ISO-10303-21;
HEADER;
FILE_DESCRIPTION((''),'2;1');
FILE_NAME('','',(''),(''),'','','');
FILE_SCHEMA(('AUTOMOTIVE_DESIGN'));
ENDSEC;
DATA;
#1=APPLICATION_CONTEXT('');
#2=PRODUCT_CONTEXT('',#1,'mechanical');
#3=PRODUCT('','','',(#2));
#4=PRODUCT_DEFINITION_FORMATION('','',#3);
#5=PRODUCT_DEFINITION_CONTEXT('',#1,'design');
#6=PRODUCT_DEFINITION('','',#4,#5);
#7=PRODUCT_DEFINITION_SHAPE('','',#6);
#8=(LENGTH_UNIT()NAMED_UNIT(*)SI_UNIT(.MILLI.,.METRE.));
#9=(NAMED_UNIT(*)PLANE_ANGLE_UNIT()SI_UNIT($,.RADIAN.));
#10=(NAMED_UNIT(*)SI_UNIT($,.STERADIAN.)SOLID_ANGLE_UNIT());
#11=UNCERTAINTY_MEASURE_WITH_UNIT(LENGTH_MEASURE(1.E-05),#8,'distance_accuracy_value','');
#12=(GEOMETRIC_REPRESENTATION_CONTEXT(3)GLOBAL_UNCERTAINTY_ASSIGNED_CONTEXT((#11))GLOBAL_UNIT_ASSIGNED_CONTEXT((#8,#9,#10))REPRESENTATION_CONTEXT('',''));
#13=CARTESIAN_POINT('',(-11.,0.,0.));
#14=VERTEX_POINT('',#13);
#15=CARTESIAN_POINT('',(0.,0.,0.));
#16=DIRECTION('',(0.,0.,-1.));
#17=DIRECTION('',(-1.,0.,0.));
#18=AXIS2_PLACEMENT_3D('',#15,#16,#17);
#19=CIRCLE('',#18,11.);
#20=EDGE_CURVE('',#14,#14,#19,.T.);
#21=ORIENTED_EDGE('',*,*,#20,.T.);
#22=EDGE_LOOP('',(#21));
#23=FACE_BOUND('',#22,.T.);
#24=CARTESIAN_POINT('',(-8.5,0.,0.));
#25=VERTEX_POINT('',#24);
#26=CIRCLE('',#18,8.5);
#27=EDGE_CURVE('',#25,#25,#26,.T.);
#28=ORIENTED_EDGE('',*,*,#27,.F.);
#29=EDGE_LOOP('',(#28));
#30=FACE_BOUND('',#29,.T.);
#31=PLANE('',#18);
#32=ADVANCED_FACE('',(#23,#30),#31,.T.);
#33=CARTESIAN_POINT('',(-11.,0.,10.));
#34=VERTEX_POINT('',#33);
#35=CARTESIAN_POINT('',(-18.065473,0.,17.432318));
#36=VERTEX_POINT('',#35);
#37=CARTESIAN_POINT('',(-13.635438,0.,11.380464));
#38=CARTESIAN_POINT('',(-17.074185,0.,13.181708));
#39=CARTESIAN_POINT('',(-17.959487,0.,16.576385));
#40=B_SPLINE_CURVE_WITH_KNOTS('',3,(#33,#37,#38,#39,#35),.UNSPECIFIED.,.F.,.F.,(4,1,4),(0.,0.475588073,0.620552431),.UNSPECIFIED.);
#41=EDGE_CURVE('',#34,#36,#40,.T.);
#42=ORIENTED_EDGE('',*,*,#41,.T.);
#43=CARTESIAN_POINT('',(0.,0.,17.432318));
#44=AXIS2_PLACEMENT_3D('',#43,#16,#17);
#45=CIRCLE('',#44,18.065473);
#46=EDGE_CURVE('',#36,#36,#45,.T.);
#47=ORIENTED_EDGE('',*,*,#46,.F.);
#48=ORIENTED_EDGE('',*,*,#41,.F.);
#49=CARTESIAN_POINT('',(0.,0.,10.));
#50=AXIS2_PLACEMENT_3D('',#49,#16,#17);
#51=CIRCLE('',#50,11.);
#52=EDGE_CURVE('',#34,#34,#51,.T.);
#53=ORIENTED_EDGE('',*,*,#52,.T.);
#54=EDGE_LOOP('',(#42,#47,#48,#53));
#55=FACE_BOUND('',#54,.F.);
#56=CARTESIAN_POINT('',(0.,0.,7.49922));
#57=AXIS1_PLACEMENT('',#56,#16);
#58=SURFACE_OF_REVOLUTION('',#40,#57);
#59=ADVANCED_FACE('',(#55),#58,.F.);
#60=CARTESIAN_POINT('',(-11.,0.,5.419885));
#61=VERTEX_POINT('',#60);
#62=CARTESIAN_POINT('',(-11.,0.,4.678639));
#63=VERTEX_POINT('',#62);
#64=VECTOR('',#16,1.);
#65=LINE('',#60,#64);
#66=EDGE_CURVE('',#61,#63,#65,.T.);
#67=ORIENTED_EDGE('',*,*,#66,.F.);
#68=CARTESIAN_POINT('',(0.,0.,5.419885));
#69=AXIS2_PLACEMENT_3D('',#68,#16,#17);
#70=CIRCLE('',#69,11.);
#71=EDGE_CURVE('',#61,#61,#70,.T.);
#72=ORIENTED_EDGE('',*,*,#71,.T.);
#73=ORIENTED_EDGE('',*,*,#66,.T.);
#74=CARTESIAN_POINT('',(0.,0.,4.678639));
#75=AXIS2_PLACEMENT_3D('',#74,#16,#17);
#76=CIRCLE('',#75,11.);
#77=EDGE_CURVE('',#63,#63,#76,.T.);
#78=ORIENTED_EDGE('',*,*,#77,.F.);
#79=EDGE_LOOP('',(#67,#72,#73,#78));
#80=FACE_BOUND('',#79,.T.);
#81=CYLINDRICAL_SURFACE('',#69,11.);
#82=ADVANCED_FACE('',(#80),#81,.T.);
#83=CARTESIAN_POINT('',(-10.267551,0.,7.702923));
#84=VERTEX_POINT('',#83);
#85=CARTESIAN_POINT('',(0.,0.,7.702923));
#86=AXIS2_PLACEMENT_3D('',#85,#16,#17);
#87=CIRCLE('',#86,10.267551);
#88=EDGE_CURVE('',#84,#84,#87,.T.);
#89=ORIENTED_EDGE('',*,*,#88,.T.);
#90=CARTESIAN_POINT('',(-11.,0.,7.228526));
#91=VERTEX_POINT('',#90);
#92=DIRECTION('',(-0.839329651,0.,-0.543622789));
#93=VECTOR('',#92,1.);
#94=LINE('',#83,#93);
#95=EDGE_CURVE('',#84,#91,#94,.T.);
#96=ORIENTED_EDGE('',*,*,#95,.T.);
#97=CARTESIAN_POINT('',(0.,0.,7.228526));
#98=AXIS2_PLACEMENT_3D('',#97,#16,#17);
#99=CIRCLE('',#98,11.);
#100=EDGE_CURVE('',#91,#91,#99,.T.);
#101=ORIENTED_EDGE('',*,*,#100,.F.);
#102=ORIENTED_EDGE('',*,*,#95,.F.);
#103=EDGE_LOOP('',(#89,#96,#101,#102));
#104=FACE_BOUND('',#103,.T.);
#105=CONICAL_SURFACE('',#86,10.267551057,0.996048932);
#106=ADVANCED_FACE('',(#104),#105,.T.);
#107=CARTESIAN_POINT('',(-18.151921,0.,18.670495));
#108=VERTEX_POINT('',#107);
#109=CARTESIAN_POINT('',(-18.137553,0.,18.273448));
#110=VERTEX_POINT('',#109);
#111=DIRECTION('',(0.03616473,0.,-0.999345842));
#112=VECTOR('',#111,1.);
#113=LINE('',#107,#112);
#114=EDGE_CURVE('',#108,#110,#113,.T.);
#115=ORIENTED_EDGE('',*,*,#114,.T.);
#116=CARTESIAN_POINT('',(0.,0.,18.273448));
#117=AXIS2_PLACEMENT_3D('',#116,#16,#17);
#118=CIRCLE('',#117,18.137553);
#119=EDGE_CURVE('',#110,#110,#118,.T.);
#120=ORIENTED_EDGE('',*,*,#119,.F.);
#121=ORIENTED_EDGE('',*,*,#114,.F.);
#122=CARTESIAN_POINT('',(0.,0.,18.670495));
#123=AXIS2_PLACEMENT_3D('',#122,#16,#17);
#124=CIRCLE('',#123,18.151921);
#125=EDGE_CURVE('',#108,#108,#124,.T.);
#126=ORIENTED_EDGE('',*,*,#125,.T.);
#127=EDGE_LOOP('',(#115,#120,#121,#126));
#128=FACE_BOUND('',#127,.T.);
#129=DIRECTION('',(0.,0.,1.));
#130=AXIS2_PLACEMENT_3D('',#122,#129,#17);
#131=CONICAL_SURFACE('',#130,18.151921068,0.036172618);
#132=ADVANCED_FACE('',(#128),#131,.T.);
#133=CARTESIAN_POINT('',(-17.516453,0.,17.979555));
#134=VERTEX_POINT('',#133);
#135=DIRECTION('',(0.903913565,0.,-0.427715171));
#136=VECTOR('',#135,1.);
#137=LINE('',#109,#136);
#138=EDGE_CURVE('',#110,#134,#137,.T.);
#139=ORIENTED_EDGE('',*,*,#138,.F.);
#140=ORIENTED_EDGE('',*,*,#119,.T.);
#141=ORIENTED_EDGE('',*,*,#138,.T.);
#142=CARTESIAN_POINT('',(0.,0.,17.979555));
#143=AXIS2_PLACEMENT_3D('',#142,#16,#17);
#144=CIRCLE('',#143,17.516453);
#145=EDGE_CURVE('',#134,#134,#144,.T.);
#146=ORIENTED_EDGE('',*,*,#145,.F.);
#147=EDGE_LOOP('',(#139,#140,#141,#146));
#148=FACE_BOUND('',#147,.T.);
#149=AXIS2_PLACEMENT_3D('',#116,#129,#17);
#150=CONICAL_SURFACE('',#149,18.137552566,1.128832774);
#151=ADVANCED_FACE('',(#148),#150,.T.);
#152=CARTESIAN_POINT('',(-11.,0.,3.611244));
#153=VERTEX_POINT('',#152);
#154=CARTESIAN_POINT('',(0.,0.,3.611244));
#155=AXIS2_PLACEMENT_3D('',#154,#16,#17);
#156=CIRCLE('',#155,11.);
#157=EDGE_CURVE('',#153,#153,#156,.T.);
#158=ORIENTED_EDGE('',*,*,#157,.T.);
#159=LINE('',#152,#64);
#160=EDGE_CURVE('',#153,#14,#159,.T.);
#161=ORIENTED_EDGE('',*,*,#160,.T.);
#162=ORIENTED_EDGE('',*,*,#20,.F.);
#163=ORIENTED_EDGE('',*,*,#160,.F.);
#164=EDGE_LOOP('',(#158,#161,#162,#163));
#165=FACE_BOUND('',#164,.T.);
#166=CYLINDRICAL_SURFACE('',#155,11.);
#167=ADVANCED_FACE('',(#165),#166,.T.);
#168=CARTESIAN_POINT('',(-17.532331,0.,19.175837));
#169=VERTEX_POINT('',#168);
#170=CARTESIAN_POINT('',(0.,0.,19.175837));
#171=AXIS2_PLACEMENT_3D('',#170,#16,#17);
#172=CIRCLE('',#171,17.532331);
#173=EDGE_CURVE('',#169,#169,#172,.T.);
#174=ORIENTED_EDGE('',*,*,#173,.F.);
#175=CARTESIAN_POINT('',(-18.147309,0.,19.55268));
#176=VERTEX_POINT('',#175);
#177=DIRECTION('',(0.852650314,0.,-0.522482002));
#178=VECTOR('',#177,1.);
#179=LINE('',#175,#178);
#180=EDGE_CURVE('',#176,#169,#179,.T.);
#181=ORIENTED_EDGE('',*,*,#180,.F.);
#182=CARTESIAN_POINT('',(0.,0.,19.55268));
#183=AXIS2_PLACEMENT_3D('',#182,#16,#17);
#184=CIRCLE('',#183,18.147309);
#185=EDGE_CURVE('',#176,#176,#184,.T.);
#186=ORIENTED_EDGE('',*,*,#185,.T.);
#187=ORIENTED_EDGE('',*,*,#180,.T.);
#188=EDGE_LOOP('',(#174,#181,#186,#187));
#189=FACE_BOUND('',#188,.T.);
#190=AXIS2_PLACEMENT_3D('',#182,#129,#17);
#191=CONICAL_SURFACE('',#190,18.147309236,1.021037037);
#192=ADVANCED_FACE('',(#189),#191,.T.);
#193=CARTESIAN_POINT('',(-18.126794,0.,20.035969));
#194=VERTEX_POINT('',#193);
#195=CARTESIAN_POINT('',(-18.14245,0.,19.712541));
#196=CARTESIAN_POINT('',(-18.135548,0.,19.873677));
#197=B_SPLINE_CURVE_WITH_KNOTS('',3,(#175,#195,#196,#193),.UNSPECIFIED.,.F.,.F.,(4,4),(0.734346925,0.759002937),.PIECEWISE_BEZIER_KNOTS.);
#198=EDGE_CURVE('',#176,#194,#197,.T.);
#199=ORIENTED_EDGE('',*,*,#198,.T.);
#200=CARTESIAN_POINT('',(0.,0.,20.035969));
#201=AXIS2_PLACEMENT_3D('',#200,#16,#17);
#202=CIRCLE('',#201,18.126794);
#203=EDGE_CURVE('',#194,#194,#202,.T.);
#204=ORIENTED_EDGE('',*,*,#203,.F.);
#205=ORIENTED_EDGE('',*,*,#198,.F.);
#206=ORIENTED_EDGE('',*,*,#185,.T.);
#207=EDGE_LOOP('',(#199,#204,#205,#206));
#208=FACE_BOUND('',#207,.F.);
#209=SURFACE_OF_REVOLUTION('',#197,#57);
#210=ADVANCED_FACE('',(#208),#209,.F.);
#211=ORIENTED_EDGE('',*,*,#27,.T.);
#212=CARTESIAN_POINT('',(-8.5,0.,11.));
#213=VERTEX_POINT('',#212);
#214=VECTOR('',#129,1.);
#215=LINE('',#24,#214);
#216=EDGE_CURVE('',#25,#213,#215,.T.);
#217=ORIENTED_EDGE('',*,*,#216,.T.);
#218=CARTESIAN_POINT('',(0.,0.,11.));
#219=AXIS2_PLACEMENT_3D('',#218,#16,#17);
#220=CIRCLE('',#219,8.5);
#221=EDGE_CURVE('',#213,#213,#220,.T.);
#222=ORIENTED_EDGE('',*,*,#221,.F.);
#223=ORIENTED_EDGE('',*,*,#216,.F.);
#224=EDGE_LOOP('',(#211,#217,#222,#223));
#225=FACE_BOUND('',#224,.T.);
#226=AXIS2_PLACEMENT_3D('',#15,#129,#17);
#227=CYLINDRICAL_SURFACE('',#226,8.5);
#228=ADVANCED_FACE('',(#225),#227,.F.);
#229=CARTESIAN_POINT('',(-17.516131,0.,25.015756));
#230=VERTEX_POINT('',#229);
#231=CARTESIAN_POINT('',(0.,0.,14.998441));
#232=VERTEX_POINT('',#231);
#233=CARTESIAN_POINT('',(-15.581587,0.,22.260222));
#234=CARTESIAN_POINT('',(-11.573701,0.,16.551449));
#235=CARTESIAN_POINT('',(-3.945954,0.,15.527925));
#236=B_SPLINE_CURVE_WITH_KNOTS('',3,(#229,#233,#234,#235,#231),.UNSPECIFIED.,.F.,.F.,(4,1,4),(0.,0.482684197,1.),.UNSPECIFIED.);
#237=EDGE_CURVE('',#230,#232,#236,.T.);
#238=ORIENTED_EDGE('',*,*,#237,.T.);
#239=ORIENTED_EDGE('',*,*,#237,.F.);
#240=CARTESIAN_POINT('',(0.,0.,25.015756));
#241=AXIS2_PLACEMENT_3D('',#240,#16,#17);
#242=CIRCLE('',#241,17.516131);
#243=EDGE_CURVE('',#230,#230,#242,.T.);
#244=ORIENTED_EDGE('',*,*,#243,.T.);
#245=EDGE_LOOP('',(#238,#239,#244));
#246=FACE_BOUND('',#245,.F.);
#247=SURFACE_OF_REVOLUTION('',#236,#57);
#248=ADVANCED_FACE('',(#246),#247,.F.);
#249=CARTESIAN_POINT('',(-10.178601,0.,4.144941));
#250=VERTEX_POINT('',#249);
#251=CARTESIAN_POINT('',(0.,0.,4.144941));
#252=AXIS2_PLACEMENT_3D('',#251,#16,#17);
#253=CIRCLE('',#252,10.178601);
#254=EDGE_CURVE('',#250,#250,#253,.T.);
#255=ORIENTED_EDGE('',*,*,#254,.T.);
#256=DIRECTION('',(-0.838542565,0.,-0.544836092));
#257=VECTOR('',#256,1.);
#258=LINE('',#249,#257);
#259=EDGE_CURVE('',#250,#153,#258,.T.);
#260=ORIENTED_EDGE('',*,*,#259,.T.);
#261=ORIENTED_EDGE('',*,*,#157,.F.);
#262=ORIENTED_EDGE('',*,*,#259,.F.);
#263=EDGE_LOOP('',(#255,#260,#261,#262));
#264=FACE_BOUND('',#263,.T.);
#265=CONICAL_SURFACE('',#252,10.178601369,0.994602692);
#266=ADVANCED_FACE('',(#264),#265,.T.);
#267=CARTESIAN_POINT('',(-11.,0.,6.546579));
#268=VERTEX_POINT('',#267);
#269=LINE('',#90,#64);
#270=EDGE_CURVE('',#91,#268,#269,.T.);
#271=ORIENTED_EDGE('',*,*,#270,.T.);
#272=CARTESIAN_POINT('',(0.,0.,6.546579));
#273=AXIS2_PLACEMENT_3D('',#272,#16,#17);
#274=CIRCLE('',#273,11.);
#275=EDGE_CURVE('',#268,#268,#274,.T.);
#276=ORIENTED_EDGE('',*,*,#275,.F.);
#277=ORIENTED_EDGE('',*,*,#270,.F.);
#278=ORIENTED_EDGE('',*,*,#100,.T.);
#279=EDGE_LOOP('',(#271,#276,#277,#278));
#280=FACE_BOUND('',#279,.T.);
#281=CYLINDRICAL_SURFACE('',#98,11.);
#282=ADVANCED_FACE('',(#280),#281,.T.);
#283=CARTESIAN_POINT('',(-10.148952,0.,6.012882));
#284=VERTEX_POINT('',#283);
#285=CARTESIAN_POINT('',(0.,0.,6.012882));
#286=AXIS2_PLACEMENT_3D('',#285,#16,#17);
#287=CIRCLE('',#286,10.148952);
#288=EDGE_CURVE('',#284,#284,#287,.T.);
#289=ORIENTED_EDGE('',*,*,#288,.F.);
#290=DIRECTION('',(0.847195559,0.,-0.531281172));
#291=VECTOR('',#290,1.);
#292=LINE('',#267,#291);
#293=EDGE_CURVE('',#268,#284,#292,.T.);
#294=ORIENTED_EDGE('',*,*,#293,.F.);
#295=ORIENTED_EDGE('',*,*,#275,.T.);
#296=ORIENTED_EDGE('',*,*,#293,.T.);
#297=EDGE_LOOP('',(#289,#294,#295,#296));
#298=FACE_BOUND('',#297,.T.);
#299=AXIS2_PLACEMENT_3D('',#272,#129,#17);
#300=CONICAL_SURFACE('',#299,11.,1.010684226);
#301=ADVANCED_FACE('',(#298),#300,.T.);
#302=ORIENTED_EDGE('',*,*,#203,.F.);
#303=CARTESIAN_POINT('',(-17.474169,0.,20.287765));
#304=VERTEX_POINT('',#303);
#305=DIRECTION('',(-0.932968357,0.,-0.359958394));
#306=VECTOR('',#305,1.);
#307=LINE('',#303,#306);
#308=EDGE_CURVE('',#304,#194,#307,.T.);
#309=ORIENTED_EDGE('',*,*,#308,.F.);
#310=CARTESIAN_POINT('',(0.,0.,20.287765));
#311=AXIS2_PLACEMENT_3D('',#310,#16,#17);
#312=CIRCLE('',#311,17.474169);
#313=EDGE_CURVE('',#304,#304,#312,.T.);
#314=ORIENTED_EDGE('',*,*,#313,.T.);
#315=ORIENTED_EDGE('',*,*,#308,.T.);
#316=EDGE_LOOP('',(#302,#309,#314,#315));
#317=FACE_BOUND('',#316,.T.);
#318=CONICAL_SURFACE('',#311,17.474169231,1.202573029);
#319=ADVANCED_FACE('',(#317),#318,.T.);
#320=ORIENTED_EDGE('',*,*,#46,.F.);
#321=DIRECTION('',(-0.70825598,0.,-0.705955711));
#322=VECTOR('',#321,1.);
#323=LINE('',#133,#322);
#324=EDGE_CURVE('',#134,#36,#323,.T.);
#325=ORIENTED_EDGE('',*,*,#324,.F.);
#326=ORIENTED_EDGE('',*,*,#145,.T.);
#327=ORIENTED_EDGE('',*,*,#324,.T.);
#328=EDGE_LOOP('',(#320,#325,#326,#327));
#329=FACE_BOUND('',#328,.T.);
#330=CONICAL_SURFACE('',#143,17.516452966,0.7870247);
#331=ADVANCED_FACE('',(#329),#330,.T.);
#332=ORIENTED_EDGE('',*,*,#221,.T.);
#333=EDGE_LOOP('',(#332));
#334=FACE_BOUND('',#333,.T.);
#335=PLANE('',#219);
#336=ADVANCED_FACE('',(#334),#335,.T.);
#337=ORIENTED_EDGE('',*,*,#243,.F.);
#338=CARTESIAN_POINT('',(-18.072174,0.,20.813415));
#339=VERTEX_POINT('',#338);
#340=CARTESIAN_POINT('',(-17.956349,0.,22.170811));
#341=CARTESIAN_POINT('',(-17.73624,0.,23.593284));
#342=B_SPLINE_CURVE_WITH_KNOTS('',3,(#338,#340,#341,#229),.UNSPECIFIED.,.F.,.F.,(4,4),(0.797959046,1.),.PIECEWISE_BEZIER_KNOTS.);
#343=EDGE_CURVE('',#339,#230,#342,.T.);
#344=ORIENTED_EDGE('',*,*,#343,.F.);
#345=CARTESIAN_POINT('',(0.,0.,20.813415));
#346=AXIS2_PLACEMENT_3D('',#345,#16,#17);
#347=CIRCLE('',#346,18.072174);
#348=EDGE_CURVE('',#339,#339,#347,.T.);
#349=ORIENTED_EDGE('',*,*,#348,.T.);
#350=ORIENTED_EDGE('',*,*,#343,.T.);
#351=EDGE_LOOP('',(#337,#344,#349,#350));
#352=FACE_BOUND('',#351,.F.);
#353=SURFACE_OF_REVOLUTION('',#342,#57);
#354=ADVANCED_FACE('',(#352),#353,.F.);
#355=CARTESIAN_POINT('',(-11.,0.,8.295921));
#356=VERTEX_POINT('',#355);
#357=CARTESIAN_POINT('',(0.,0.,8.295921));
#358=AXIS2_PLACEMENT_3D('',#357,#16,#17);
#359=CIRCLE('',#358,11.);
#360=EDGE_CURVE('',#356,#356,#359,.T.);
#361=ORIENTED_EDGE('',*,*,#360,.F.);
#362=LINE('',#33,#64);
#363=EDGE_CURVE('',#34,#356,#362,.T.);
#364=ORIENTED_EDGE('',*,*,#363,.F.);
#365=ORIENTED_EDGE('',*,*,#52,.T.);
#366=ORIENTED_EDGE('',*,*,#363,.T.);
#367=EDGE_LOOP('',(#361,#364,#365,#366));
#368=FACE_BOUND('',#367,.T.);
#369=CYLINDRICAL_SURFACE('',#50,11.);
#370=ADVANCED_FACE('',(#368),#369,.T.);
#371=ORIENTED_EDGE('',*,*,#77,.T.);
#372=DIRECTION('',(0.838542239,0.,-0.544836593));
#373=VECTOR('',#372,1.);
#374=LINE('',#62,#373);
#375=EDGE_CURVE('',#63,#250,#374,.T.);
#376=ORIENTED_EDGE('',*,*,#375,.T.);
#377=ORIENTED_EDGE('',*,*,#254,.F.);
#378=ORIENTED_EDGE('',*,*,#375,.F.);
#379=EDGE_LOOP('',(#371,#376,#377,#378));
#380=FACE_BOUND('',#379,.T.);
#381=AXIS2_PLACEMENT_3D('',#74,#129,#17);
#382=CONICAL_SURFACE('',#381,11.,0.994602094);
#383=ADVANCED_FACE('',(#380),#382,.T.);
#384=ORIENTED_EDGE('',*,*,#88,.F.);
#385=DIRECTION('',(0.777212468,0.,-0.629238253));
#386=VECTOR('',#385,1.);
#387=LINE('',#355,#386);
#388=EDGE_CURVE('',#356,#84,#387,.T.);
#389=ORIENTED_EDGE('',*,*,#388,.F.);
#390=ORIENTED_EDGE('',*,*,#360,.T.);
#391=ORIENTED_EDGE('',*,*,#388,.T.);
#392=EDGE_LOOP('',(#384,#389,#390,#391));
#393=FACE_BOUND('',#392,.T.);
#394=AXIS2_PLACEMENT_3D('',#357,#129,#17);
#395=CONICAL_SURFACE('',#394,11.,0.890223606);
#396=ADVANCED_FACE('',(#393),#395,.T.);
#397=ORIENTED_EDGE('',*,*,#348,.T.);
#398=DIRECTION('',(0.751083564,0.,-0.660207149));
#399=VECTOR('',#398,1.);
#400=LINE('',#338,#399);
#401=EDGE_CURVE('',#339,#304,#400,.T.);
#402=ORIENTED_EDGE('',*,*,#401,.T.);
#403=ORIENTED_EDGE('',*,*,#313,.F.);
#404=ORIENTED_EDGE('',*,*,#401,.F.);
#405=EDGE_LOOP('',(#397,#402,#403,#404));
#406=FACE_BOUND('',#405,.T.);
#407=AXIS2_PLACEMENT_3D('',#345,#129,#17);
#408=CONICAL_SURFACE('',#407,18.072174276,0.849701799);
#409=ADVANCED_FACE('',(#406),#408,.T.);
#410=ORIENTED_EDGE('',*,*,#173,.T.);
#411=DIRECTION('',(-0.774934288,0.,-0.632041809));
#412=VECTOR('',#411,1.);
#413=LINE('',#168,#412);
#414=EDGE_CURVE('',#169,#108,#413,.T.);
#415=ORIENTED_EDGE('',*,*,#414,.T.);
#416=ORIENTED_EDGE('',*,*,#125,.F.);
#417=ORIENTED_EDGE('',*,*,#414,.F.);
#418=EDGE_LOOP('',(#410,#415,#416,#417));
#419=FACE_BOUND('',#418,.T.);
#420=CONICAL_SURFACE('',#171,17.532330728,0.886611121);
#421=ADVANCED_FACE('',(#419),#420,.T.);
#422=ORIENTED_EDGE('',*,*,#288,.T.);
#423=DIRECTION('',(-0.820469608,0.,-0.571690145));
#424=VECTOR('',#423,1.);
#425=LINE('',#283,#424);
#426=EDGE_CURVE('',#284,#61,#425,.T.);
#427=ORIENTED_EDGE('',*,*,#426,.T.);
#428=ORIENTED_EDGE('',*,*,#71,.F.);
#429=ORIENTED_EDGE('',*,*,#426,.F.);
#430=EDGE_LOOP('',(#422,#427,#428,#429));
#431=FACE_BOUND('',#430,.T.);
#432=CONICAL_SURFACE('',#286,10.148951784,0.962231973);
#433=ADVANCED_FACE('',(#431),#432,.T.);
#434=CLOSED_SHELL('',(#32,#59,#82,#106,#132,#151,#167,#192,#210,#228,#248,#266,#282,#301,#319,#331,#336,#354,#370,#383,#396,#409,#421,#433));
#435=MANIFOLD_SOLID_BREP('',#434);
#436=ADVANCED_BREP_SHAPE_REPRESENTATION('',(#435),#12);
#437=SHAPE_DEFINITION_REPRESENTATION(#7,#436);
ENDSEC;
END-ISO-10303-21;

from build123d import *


with BuildPart() as f1:
    # F0 (on Front) → F1 (revolve)
    with BuildSketch(Plane.XZ):
        with BuildLine():
            Line((-11, 0), (-8.5, 0))
            Line((-8.5, 0), (-8.5, 11))
            Line((-8.5, 11), (0, 11))
            Line((0, 11), (0, 14.9984406307))
            add(Edge.make_bspline(
                [(-17.5161305815, 25.0157564878), (-15.5815870923, 22.2602219345), (-11.5737005689, 16.5514488505), (-3.9459538942, 15.5279254568), (0, 14.9984406307)],
                knots=[0, 0, 0, 0, 0.4826841973, 1, 1, 1, 1], degree=3))
            add(Edge.make_bspline(
                [(-18.072174276, 20.8134150085), (-17.9563486733, 22.1708113356), (-17.7362396274, 23.5932839117), (-17.5161305815, 25.0157564878)],
                knots=[0.7979590462, 0.7979590462, 0.7979590462, 0.7979590462, 1, 1, 1, 1], degree=3))
            Line((-18.072174276, 20.8134150085), (-17.474169231, 20.2877648349))
            Line((-17.474169231, 20.2877648349), (-18.1267939942, 20.0359687694))
            add(Edge.make_bspline(
                [(-18.1473092364, 19.552679753), (-18.1424496564, 19.7125412352), (-18.1355480675, 19.8736769971), (-18.1267939942, 20.0359687694)],
                knots=[0.7343469252, 0.7343469252, 0.7343469252, 0.7343469252, 0.7590029372, 0.7590029372, 0.7590029372, 0.7590029372], degree=3))
            Line((-18.1473092364, 19.552679753), (-17.5323307281, 19.1758368702))
            Line((-17.5323307281, 19.1758368702), (-18.1519210677, 18.6704946689))
            Line((-18.1519210677, 18.6704946689), (-18.1375525664, 18.2734475453))
            Line((-18.1375525664, 18.2734475453), (-17.5164529661, 17.9795547089))
            Line((-17.5164529661, 17.9795547089), (-18.06547265, 17.4323181276))
            add(Edge.make_bspline(
                [(-11, 10), (-13.635437822, 11.3804638315), (-17.0741854324, 13.1817078836), (-17.9594871723, 16.5763849323), (-18.06547265, 17.4323181276)],
                knots=[0, 0, 0, 0, 0.4755880726, 0.6205524314, 0.6205524314, 0.6205524314, 0.6205524314], degree=3))
            Line((-11, 10), (-11, 8.2959206775))
            Line((-11, 8.2959206775), (-10.267551057, 7.7029233798))
            Line((-10.267551057, 7.7029233798), (-11, 7.2285258211))
            Line((-11, 7.2285258211), (-11, 6.5465788357))
            Line((-11, 6.5465788357), (-10.1489517838, 6.0128816403))
            Line((-10.1489517838, 6.0128816403), (-11, 5.4198848084))
            Line((-11, 5.4198848084), (-11, 4.678638652))
            Line((-11, 4.678638652), (-10.1786013693, 4.144940991))
            Line((-10.1786013693, 4.144940991), (-11, 3.6112440284))
            Line((-11, 3.6112440284), (-11, 0))
        make_face()
    revolve(axis=Axis((0, 0, 7.4992203154), (0, 0, -1)))


solid = f1.part
